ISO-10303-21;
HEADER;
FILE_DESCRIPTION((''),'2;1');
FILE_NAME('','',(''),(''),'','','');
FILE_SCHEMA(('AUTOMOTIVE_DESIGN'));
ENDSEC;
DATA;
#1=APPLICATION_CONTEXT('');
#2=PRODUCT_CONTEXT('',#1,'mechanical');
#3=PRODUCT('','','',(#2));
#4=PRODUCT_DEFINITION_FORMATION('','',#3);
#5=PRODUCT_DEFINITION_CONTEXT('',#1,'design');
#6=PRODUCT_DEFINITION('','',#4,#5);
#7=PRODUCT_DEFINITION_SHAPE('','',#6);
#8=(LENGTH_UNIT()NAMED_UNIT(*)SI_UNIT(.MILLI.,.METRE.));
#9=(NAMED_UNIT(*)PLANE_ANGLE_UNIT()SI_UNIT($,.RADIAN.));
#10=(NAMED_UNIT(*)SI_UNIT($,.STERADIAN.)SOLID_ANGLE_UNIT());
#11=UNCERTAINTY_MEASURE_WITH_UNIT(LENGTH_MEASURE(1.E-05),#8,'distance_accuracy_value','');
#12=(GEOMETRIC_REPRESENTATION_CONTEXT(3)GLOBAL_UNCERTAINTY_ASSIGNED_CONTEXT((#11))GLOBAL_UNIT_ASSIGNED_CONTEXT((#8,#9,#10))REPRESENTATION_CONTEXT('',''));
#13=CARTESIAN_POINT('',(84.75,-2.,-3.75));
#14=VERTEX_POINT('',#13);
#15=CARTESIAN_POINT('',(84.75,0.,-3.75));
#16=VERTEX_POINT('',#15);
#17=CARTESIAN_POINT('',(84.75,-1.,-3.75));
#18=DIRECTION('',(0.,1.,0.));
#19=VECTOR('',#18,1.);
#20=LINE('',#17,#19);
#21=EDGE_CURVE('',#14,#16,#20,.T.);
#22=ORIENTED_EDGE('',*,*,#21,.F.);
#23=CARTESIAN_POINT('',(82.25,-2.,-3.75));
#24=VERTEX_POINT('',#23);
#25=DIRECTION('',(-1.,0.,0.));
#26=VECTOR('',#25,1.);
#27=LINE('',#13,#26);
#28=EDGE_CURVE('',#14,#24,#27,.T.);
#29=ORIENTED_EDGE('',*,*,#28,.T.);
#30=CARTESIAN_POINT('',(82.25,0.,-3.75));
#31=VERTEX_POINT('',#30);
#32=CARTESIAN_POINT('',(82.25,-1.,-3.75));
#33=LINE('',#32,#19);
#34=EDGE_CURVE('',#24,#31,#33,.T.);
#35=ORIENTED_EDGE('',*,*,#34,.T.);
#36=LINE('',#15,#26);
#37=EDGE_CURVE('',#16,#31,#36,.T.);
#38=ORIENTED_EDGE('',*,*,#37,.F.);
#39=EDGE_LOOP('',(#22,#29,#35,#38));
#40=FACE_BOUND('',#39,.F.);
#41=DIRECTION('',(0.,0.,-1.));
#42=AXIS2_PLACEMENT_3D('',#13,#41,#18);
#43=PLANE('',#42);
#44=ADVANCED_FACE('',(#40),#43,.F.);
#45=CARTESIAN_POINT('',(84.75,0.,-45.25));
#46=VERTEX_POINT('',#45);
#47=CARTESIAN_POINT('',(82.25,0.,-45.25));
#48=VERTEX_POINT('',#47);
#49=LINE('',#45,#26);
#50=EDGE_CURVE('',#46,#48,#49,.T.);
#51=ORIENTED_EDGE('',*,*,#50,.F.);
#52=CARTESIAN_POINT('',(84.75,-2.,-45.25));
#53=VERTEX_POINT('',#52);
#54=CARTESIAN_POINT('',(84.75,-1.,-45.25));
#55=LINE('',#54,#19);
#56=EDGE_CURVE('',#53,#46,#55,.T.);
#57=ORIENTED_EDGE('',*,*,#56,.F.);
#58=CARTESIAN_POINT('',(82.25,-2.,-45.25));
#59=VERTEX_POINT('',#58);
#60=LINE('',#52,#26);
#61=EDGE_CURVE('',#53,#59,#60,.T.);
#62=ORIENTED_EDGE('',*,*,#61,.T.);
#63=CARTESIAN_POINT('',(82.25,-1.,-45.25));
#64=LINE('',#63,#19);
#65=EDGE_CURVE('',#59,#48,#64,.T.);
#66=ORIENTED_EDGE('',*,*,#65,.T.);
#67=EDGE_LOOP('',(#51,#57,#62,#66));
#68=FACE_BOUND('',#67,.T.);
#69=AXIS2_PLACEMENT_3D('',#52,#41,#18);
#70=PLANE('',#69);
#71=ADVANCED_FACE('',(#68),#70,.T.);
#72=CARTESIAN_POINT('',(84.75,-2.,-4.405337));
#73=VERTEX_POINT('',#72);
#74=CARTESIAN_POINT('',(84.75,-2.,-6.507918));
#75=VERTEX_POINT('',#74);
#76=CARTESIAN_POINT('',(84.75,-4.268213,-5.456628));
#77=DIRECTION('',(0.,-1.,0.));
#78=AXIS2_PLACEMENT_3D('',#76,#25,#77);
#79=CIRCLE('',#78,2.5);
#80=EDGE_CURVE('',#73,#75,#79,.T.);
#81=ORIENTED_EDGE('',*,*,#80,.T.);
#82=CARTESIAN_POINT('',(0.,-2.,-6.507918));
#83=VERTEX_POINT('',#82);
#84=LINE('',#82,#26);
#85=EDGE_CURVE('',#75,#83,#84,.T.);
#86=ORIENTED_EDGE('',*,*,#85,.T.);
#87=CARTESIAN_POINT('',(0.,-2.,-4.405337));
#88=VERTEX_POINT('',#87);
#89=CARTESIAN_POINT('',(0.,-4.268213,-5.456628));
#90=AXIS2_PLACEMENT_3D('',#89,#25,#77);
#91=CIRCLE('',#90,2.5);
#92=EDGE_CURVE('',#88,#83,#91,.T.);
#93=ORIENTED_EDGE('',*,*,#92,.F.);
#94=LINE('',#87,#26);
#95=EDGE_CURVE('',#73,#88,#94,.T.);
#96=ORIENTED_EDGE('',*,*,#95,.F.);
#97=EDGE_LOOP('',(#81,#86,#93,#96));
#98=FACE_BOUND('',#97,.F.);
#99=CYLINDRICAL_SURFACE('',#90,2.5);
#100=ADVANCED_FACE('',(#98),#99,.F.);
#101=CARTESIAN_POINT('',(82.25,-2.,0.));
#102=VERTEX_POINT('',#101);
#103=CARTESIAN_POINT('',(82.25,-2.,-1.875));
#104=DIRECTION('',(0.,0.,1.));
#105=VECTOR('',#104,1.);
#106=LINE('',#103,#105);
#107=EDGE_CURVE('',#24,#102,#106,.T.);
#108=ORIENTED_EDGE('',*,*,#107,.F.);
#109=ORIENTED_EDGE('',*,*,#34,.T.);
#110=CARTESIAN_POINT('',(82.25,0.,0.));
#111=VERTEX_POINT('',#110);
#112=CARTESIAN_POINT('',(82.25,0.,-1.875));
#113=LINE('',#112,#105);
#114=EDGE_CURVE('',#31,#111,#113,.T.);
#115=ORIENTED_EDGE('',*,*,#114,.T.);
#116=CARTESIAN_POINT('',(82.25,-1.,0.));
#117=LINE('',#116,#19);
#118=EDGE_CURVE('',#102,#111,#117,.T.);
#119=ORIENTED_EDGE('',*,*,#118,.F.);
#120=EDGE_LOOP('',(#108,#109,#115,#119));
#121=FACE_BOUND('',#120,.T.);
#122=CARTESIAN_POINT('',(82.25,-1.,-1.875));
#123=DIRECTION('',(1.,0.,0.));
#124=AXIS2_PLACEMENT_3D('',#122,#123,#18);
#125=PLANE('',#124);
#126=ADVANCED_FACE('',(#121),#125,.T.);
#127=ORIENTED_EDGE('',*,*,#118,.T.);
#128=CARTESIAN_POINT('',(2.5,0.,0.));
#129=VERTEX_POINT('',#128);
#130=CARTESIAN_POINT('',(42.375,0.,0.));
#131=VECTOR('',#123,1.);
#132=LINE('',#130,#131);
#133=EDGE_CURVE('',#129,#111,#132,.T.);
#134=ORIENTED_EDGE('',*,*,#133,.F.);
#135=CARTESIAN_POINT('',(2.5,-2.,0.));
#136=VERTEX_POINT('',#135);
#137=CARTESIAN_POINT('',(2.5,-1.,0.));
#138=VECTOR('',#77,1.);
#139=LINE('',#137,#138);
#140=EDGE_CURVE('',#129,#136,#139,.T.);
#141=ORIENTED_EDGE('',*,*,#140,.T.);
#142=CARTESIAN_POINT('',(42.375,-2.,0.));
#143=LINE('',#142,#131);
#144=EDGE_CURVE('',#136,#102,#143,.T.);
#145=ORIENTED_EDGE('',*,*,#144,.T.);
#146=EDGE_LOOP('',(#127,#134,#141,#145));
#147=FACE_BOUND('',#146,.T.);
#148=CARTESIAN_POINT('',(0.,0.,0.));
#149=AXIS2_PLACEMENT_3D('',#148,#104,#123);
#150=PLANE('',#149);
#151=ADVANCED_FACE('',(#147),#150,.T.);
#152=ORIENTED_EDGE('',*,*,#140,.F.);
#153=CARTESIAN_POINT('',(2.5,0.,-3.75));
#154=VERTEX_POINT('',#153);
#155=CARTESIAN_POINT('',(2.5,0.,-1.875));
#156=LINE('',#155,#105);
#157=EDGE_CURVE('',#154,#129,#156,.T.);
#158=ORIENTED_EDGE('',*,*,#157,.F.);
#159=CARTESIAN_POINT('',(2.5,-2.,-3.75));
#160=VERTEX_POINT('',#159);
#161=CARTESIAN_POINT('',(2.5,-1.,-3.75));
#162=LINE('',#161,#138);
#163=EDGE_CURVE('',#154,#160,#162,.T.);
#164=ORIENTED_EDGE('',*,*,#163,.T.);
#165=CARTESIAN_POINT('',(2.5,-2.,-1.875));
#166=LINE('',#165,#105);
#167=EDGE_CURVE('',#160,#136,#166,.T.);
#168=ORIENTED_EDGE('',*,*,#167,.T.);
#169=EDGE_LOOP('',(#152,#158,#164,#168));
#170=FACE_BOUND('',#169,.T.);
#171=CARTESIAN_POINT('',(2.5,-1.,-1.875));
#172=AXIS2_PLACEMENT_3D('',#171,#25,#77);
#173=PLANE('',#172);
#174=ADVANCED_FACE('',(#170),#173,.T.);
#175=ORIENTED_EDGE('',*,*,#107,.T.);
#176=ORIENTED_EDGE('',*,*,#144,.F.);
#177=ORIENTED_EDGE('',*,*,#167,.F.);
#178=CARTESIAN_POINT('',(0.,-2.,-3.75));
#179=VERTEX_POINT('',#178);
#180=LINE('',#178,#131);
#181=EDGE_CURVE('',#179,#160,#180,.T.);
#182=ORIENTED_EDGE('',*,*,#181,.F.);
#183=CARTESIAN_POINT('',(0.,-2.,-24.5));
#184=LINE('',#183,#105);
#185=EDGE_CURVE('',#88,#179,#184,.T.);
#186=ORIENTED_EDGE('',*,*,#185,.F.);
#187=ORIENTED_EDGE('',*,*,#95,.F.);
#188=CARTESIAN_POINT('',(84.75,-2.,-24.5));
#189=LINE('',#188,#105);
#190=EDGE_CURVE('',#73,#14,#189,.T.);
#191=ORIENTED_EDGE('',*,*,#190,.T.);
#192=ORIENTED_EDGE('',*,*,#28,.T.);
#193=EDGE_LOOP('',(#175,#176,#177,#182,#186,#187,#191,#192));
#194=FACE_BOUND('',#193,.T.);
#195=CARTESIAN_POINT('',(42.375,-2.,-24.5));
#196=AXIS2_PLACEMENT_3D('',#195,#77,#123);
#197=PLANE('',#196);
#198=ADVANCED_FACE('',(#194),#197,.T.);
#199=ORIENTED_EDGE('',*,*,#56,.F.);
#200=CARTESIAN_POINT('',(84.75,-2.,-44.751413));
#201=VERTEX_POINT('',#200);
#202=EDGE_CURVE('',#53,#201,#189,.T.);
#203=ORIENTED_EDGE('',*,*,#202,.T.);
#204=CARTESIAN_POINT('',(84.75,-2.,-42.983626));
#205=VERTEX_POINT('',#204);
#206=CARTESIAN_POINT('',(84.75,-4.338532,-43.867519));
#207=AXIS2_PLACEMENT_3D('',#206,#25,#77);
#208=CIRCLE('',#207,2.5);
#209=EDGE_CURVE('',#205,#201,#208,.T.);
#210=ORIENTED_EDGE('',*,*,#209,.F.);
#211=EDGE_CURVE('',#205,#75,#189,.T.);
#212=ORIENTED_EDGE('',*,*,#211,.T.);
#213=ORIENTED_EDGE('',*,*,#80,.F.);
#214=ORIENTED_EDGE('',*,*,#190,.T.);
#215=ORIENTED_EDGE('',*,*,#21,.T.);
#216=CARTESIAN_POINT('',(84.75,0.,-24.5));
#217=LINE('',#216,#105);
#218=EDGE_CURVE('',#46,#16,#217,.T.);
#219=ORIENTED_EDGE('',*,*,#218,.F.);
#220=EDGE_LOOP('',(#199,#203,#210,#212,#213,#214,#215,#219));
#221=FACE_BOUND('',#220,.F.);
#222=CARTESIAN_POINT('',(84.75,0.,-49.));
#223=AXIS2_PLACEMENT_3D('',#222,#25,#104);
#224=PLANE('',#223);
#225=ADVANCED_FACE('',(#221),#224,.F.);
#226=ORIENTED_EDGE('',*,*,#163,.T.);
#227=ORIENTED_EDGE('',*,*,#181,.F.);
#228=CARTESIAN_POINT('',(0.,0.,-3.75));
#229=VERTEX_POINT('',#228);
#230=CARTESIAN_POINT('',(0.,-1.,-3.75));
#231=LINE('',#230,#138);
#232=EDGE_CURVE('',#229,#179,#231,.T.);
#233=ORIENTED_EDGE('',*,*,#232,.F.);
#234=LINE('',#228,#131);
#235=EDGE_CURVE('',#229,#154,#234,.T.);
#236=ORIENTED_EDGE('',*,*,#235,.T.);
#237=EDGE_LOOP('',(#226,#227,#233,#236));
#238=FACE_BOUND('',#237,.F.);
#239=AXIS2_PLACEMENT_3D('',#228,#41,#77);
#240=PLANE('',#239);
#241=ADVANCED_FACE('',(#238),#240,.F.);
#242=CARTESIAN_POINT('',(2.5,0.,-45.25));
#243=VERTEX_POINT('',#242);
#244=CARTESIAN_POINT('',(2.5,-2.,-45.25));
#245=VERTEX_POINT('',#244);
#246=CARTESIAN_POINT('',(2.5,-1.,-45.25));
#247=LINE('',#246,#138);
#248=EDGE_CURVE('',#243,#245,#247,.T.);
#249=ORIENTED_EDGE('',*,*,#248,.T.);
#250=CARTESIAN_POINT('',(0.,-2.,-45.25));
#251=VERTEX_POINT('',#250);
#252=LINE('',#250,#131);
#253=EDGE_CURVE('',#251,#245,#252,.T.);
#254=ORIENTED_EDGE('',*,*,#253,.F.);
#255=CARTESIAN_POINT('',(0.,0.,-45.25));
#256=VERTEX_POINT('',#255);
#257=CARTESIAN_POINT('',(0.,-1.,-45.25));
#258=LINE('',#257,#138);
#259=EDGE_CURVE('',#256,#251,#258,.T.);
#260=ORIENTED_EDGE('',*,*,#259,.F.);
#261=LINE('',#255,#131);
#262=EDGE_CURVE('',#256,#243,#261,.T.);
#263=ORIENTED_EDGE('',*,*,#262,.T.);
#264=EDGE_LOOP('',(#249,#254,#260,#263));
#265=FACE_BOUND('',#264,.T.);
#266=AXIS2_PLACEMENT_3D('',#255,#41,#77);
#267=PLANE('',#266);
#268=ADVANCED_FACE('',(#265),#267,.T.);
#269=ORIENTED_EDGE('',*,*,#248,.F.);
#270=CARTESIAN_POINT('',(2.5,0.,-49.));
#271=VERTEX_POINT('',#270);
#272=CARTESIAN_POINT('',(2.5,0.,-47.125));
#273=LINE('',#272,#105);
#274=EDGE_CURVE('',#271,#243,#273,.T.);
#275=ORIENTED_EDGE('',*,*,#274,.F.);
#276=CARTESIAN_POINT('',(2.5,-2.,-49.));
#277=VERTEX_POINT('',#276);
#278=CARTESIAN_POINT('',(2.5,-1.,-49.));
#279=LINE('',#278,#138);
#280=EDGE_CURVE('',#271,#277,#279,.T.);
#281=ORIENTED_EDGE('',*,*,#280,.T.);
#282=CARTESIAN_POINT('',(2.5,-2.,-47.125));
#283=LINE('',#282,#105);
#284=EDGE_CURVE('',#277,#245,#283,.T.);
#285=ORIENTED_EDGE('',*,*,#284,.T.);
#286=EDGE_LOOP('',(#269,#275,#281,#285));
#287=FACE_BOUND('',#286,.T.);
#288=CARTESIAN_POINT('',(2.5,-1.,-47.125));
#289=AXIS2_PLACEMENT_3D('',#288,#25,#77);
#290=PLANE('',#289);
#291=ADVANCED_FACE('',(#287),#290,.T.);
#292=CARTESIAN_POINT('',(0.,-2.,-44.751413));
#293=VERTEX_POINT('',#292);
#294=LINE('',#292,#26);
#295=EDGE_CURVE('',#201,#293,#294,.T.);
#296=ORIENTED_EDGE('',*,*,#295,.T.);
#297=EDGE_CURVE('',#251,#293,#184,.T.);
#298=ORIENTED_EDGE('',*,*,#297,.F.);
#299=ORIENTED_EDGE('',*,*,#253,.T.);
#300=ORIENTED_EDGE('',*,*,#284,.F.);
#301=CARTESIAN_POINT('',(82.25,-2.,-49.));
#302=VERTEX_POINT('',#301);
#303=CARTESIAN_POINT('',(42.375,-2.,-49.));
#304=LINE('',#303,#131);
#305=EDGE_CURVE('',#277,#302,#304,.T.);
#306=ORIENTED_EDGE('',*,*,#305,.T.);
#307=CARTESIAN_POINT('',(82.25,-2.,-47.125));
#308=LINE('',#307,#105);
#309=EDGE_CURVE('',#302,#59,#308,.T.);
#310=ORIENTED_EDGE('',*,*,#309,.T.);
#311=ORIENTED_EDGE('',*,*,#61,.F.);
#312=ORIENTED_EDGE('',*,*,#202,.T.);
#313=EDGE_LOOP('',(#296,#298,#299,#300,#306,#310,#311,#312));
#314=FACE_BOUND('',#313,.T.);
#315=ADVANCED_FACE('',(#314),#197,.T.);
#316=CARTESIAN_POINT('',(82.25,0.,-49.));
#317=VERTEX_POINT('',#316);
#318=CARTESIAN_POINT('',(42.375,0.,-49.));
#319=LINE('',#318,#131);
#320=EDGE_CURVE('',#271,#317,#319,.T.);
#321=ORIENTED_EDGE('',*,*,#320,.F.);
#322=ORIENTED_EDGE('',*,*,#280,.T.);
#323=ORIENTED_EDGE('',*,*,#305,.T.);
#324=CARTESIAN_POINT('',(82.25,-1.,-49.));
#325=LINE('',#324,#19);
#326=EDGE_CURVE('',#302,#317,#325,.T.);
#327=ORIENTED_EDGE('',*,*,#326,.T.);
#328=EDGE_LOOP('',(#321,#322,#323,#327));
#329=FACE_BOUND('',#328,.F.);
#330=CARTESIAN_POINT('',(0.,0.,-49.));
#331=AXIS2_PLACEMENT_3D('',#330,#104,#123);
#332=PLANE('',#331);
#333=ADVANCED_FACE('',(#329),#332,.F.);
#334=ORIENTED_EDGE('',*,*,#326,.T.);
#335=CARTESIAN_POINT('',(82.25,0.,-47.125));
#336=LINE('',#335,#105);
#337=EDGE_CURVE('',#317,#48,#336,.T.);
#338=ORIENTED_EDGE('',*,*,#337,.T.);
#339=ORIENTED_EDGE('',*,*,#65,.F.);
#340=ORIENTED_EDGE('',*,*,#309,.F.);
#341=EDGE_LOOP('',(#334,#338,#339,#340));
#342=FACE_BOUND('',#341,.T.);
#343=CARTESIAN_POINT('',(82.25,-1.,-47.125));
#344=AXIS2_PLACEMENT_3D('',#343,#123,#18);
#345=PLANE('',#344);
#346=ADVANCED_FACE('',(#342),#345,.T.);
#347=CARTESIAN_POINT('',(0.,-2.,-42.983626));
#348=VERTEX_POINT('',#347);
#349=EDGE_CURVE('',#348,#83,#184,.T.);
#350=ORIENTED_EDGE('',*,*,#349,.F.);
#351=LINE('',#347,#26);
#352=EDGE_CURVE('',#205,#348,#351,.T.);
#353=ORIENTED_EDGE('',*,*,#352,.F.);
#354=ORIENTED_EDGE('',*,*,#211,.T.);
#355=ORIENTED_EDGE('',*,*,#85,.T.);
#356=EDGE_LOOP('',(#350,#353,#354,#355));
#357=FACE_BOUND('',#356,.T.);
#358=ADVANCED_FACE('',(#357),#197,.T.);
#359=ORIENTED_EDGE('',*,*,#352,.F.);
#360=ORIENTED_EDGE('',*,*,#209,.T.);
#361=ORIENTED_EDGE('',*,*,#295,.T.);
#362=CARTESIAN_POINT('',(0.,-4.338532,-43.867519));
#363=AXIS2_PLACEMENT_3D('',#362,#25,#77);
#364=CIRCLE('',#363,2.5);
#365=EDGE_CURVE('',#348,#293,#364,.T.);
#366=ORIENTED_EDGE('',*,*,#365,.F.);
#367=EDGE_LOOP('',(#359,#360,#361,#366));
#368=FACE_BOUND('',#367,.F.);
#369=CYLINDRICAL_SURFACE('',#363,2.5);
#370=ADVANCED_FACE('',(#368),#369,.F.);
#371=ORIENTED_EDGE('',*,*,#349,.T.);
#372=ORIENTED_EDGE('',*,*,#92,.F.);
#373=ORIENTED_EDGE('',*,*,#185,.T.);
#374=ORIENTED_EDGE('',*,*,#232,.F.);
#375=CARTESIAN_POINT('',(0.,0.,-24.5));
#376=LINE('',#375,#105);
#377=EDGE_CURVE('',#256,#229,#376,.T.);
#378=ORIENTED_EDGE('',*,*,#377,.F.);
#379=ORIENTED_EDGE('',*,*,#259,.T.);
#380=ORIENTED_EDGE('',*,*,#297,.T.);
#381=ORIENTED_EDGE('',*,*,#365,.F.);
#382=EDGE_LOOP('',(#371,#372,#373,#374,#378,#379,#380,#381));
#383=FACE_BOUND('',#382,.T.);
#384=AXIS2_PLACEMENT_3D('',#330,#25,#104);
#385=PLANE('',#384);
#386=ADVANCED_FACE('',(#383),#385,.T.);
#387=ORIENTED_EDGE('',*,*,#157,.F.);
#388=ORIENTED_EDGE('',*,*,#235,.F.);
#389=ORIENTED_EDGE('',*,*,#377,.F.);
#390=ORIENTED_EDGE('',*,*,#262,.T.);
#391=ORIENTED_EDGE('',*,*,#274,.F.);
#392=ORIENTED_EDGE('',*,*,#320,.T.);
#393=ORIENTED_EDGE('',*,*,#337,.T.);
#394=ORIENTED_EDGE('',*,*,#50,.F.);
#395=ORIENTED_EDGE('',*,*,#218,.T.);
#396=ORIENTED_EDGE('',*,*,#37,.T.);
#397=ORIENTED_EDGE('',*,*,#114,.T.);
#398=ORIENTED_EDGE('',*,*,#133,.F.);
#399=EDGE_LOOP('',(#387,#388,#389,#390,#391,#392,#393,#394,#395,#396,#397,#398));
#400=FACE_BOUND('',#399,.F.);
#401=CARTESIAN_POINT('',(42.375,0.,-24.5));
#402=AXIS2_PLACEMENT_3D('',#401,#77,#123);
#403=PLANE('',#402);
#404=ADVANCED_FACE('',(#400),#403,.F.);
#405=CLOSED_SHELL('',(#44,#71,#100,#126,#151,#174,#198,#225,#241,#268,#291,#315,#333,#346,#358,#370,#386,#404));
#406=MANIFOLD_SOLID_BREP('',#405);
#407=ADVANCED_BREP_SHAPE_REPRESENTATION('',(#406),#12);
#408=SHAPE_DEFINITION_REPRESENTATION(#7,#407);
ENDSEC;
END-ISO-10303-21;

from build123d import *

# Parameters (mm, degrees)
F0_W      = 1695
F0_H      = 980
F1_DEPTH  = 40
F2_R      = 50
F3_DEPTH  = 1695.001
F6_W      = 40
F6_H      = 75
F7_DEPTH  = 50
F8_W      = 40
F8_H      = 75
F9_DEPTH  = 50
F10_SCALE = 0.05


# Not quite as in the source:
# - a feature of the source that left no trace in its solid (it failed there, or was rolled back) is left out


with BuildPart() as f1:
    # F0 (on Front) → F1 (new body)
    with BuildSketch(Plane.XZ):
        with Locations((847.5, -490)):
            Rectangle(F0_W, F0_H)
    extrude(amount=F1_DEPTH)

    # F2 (on face) → F3 (cut, through all)
    with BuildSketch(Plane(origin=(0, 0, 0), x_dir=(0, -1, 0), z_dir=(-1, 0, 0))):
        with Locations((85.3642523289, -109.1325581074)):
            Circle(F2_R)
        with Locations((86.7706388235, -877.3503899574)):
            Circle(F2_R)
    extrude(amount=-F3_DEPTH, mode=Mode.SUBTRACT)

    # F6 (on face) → F7 (cut)
    with BuildSketch(Plane(origin=(0, 0, 0), x_dir=(0, -1, 0), z_dir=(-1, 0, 0))):
        with Locations((20, -37.5)):
            Rectangle(F6_W, F6_H)
        with Locations((20, -942.5)):
            Rectangle(F6_W, F6_H)
    extrude(amount=-F7_DEPTH, mode=Mode.SUBTRACT)

    # F8 (on face) → F9 (cut)
    with BuildSketch(Plane.YZ.offset(1695)):
        with Locations((-20, -37.5)):
            Rectangle(F8_W, F8_H)
        with Locations((-20, -942.5)):
            Rectangle(F8_W, F8_H)
    extrude(amount=-F9_DEPTH, mode=Mode.SUBTRACT)


with BuildPart() as f1_1:
    # F10: moved
    add(f1.part.scale(F10_SCALE))


solid = f1_1.part
